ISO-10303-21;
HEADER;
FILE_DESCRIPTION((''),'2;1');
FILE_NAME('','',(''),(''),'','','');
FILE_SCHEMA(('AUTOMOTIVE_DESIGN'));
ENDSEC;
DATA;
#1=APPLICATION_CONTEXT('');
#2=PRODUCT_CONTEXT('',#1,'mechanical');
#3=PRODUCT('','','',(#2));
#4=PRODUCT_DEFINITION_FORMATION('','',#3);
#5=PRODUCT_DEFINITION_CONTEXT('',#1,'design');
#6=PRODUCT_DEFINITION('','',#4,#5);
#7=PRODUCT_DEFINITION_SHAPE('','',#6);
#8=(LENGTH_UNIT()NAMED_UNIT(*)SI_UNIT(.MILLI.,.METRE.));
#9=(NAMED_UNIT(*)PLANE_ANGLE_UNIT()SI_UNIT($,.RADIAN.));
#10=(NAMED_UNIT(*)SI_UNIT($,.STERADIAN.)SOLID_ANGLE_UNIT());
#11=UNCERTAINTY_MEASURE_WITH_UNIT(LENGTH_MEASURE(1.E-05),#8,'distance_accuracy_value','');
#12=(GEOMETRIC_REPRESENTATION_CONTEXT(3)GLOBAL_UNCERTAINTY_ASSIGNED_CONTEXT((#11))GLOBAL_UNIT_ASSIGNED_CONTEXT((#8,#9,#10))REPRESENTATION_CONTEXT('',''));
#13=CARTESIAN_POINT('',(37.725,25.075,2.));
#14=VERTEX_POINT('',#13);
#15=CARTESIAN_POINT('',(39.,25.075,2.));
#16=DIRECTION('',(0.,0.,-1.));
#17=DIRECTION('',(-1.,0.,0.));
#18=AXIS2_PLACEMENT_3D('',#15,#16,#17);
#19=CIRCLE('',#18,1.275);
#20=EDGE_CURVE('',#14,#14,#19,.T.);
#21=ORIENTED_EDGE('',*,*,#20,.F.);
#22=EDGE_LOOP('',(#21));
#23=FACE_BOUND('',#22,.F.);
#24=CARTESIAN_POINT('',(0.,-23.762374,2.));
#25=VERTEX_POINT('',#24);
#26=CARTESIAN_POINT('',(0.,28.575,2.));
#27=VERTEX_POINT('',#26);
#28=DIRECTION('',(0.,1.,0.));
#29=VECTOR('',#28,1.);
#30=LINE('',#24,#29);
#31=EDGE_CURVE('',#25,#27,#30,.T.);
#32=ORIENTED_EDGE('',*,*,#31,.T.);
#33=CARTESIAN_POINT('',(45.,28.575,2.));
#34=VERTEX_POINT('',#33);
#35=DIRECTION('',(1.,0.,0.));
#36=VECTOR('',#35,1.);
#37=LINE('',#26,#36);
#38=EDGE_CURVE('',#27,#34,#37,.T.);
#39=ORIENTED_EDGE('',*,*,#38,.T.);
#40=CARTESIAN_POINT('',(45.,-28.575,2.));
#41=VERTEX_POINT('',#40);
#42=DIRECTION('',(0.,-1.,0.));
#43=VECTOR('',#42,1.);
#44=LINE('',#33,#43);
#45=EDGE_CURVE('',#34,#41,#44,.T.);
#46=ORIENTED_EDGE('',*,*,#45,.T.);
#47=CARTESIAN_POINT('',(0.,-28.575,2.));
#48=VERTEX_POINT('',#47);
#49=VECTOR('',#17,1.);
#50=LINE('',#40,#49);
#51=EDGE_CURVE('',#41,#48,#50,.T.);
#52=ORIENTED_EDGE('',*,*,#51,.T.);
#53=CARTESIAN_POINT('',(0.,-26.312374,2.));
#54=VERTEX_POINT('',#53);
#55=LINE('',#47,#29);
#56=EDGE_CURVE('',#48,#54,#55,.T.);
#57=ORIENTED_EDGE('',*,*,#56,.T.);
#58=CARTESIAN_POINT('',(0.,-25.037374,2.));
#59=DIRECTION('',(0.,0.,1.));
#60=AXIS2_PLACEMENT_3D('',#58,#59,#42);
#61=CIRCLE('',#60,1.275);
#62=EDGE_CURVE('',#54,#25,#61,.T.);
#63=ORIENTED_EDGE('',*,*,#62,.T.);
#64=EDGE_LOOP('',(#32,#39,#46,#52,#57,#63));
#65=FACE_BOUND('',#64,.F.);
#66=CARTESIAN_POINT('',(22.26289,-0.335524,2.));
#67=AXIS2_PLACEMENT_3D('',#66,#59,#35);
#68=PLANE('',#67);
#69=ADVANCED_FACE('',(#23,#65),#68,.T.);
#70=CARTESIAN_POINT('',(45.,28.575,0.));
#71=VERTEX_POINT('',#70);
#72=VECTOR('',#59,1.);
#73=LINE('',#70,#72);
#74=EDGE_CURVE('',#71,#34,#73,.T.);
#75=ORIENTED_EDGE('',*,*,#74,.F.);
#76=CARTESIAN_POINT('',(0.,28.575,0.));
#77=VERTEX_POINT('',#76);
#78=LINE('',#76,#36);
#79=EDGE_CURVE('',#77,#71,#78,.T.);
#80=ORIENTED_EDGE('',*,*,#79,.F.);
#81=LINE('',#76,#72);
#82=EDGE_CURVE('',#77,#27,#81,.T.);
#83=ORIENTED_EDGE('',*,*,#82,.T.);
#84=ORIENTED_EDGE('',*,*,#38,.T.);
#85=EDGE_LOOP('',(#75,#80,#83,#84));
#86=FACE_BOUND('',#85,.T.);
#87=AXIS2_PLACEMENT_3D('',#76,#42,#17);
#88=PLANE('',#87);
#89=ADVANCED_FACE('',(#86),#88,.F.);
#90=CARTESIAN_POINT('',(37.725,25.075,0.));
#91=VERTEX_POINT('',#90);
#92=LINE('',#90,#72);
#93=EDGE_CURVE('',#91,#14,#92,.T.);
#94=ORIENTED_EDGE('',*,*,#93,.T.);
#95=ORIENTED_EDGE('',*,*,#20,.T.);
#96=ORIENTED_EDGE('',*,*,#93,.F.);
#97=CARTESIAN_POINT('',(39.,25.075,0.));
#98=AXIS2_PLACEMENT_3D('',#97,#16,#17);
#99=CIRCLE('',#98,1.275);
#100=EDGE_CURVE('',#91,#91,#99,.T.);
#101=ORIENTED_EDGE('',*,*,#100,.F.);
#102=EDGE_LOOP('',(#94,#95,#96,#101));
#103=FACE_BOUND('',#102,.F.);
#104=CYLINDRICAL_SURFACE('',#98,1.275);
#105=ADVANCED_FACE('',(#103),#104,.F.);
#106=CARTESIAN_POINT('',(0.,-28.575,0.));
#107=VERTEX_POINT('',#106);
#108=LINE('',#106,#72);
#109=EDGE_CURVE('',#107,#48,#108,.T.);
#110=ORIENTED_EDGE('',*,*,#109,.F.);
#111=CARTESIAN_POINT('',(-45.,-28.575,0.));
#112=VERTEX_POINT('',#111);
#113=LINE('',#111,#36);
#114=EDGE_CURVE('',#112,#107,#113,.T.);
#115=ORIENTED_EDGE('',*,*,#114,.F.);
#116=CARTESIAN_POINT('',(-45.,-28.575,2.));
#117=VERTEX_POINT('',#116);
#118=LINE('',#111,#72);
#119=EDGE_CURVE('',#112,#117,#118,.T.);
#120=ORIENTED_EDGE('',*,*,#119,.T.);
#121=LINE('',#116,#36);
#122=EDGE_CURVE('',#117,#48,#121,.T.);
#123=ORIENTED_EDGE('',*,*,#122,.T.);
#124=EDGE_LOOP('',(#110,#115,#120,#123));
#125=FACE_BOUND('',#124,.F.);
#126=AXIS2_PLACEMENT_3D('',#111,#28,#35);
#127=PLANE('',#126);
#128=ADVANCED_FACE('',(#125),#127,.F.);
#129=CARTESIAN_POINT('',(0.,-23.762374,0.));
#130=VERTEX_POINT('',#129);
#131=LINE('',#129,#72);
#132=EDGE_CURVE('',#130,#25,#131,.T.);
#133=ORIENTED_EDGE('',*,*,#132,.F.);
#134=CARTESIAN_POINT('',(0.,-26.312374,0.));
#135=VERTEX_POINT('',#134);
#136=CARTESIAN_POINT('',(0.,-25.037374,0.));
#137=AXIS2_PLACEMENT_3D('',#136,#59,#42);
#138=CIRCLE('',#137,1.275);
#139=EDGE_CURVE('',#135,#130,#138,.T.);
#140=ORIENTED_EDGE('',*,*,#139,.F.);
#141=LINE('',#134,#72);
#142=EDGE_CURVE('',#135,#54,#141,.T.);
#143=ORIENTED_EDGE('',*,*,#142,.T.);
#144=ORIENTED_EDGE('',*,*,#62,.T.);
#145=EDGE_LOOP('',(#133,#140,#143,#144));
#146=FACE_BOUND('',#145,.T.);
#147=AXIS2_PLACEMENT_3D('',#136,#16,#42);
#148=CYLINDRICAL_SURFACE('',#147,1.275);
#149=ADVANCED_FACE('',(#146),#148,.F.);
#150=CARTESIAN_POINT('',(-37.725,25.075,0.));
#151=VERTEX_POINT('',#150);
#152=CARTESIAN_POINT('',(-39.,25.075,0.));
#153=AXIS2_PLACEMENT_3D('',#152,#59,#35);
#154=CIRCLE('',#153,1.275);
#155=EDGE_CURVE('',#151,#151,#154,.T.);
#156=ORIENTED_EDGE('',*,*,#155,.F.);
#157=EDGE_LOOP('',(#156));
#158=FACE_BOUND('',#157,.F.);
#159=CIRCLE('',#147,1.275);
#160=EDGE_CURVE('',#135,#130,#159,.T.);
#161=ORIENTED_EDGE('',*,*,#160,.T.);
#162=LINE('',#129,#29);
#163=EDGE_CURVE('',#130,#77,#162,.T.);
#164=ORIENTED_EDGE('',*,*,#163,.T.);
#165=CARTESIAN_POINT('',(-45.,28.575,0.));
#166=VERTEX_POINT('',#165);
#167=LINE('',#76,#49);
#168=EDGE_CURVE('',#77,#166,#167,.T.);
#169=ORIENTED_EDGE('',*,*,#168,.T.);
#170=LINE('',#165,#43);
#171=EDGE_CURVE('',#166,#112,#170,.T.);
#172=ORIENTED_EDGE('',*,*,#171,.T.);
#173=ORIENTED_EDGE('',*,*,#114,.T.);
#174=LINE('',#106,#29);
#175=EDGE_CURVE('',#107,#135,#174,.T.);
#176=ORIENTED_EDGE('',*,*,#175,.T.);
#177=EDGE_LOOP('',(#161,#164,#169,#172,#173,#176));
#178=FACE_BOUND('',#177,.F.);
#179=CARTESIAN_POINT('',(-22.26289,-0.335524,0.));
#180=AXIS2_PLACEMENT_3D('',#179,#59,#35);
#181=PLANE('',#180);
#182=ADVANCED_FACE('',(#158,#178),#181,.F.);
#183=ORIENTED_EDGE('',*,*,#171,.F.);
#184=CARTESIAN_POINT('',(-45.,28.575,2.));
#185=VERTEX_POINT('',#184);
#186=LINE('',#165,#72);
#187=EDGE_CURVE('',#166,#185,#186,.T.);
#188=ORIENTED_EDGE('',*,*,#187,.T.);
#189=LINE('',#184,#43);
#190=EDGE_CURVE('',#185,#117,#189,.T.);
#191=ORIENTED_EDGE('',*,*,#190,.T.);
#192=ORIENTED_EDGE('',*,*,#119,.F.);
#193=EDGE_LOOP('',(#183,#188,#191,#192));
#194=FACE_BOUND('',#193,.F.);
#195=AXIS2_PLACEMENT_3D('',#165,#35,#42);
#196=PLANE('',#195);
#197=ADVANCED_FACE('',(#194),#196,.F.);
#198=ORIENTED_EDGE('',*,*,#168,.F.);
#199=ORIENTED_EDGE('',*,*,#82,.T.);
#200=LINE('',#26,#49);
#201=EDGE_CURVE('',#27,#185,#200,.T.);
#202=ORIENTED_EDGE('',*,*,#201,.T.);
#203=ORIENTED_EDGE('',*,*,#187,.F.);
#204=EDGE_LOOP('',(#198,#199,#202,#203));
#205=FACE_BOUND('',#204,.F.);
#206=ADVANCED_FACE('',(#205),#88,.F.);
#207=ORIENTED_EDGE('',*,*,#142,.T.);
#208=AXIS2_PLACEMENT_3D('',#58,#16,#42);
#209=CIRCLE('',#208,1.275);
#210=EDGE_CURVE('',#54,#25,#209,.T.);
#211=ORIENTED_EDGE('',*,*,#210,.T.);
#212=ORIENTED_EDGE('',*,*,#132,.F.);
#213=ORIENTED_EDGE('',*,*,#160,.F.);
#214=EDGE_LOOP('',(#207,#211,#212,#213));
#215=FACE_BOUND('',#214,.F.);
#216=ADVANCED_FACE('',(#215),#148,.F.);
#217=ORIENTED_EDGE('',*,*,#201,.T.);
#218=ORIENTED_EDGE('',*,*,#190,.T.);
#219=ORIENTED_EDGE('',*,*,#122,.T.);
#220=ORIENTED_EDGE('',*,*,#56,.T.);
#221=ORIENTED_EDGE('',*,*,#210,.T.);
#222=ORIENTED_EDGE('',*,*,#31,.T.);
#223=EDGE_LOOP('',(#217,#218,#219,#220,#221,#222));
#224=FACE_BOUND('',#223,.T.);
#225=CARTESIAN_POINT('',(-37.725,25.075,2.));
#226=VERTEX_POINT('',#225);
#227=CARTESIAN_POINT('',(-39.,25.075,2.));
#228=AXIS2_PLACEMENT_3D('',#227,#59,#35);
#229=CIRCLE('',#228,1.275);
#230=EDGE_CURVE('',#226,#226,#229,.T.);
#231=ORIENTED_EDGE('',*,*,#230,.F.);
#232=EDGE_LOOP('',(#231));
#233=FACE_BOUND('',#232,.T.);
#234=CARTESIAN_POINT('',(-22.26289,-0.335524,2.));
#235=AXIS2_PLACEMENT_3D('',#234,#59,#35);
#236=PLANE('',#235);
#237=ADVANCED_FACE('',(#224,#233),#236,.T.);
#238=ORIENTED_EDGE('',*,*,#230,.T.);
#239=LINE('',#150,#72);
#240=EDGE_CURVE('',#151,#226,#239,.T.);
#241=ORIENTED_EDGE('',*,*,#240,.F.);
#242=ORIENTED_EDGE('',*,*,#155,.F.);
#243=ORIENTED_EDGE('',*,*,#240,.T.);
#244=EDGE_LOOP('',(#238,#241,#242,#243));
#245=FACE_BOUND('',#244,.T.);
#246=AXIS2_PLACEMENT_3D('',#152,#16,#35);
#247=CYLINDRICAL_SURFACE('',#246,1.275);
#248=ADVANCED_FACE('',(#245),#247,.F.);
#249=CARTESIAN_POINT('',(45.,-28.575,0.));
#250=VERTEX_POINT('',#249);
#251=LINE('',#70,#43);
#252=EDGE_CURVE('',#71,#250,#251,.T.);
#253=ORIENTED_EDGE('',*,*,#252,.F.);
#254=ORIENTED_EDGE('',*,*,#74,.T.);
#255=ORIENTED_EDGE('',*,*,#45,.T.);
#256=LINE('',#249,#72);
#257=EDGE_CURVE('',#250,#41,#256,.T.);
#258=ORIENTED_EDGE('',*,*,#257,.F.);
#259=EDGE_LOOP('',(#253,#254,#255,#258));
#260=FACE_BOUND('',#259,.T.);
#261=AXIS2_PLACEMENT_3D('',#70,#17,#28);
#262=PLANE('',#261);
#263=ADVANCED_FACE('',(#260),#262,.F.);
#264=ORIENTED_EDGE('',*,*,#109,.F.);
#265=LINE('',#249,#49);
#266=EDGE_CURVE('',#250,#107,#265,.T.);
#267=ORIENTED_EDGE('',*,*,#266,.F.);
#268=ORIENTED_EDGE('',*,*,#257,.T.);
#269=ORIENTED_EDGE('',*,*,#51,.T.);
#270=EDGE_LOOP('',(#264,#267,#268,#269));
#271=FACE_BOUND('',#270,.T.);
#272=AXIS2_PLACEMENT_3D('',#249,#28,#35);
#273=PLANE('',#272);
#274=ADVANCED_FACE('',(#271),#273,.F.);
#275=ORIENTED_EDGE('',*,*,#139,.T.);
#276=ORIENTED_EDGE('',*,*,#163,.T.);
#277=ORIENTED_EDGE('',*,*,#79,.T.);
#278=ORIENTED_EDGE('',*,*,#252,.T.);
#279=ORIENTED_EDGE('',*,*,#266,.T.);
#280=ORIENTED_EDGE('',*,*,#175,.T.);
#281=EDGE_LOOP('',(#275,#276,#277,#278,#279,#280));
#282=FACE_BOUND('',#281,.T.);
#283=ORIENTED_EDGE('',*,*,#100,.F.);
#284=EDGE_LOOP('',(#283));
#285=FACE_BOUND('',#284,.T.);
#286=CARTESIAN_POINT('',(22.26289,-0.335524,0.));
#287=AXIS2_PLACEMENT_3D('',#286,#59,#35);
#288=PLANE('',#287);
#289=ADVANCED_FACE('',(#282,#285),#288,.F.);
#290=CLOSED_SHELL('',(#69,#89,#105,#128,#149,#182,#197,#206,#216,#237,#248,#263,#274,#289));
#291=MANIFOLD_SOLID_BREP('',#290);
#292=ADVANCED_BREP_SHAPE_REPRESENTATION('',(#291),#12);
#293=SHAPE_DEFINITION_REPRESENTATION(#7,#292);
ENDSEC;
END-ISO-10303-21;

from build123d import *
from build123d import SkipClean  # not in build123d's __all__

# Parameters (mm, degrees)
F0_R     = 2.775
F0_R_2   = 1.275
F1_DEPTH = 2


with BuildPart() as f1:
    # F0 (on Top) → F1 (new body)
    with BuildSketch(Plane.XY):
        with BuildLine():
            Line((0, 28.575), (-45, 28.575))
            Line((-45, 28.575), (-45, -28.575))
            Line((-45, -28.575), (0, -28.575))
            Line((0, -28.575), (0, -27.8123737215))
            ThreePointArc((0, -27.8123737215), (-2.775, -25.0373737215), (0, -22.2623737215))
            Line((0, -22.2623737215), (0, 28.575))
        make_face()
        with Locations((-39, 25.075)):
            Circle(F0_R, mode=Mode.SUBTRACT)
        with BuildLine():
            Line((0, -23.7623737215), (0, -22.2623737215))
            ThreePointArc((0, -22.2623737215), (-2.775, -25.0373737215), (0, -27.8123737215))
            Line((0, -27.8123737215), (0, -26.3123737215))
            ThreePointArc((0, -26.3123737215), (-1.275, -25.0373737215), (0, -23.7623737215))
        make_face()
        with Locations((-39, 25.075)):
            Circle(F0_R)
        with Locations((-39, 25.075)):
            Circle(F0_R_2, mode=Mode.SUBTRACT)
    extrude(amount=F1_DEPTH)

    # F2: F1 across face


with BuildPart() as f1_1:
    add(f1.part, clean=False)
    with SkipClean():  # cleaning this boolean's faces spoils the solid; the shape is the same uncleaned
        add(f1.part.mirror(Plane(origin=(0, 2.4063131393, 1), x_dir=(0, 1, 0), z_dir=(1, 0, 0))), clean=False)


solid = f1_1.part
